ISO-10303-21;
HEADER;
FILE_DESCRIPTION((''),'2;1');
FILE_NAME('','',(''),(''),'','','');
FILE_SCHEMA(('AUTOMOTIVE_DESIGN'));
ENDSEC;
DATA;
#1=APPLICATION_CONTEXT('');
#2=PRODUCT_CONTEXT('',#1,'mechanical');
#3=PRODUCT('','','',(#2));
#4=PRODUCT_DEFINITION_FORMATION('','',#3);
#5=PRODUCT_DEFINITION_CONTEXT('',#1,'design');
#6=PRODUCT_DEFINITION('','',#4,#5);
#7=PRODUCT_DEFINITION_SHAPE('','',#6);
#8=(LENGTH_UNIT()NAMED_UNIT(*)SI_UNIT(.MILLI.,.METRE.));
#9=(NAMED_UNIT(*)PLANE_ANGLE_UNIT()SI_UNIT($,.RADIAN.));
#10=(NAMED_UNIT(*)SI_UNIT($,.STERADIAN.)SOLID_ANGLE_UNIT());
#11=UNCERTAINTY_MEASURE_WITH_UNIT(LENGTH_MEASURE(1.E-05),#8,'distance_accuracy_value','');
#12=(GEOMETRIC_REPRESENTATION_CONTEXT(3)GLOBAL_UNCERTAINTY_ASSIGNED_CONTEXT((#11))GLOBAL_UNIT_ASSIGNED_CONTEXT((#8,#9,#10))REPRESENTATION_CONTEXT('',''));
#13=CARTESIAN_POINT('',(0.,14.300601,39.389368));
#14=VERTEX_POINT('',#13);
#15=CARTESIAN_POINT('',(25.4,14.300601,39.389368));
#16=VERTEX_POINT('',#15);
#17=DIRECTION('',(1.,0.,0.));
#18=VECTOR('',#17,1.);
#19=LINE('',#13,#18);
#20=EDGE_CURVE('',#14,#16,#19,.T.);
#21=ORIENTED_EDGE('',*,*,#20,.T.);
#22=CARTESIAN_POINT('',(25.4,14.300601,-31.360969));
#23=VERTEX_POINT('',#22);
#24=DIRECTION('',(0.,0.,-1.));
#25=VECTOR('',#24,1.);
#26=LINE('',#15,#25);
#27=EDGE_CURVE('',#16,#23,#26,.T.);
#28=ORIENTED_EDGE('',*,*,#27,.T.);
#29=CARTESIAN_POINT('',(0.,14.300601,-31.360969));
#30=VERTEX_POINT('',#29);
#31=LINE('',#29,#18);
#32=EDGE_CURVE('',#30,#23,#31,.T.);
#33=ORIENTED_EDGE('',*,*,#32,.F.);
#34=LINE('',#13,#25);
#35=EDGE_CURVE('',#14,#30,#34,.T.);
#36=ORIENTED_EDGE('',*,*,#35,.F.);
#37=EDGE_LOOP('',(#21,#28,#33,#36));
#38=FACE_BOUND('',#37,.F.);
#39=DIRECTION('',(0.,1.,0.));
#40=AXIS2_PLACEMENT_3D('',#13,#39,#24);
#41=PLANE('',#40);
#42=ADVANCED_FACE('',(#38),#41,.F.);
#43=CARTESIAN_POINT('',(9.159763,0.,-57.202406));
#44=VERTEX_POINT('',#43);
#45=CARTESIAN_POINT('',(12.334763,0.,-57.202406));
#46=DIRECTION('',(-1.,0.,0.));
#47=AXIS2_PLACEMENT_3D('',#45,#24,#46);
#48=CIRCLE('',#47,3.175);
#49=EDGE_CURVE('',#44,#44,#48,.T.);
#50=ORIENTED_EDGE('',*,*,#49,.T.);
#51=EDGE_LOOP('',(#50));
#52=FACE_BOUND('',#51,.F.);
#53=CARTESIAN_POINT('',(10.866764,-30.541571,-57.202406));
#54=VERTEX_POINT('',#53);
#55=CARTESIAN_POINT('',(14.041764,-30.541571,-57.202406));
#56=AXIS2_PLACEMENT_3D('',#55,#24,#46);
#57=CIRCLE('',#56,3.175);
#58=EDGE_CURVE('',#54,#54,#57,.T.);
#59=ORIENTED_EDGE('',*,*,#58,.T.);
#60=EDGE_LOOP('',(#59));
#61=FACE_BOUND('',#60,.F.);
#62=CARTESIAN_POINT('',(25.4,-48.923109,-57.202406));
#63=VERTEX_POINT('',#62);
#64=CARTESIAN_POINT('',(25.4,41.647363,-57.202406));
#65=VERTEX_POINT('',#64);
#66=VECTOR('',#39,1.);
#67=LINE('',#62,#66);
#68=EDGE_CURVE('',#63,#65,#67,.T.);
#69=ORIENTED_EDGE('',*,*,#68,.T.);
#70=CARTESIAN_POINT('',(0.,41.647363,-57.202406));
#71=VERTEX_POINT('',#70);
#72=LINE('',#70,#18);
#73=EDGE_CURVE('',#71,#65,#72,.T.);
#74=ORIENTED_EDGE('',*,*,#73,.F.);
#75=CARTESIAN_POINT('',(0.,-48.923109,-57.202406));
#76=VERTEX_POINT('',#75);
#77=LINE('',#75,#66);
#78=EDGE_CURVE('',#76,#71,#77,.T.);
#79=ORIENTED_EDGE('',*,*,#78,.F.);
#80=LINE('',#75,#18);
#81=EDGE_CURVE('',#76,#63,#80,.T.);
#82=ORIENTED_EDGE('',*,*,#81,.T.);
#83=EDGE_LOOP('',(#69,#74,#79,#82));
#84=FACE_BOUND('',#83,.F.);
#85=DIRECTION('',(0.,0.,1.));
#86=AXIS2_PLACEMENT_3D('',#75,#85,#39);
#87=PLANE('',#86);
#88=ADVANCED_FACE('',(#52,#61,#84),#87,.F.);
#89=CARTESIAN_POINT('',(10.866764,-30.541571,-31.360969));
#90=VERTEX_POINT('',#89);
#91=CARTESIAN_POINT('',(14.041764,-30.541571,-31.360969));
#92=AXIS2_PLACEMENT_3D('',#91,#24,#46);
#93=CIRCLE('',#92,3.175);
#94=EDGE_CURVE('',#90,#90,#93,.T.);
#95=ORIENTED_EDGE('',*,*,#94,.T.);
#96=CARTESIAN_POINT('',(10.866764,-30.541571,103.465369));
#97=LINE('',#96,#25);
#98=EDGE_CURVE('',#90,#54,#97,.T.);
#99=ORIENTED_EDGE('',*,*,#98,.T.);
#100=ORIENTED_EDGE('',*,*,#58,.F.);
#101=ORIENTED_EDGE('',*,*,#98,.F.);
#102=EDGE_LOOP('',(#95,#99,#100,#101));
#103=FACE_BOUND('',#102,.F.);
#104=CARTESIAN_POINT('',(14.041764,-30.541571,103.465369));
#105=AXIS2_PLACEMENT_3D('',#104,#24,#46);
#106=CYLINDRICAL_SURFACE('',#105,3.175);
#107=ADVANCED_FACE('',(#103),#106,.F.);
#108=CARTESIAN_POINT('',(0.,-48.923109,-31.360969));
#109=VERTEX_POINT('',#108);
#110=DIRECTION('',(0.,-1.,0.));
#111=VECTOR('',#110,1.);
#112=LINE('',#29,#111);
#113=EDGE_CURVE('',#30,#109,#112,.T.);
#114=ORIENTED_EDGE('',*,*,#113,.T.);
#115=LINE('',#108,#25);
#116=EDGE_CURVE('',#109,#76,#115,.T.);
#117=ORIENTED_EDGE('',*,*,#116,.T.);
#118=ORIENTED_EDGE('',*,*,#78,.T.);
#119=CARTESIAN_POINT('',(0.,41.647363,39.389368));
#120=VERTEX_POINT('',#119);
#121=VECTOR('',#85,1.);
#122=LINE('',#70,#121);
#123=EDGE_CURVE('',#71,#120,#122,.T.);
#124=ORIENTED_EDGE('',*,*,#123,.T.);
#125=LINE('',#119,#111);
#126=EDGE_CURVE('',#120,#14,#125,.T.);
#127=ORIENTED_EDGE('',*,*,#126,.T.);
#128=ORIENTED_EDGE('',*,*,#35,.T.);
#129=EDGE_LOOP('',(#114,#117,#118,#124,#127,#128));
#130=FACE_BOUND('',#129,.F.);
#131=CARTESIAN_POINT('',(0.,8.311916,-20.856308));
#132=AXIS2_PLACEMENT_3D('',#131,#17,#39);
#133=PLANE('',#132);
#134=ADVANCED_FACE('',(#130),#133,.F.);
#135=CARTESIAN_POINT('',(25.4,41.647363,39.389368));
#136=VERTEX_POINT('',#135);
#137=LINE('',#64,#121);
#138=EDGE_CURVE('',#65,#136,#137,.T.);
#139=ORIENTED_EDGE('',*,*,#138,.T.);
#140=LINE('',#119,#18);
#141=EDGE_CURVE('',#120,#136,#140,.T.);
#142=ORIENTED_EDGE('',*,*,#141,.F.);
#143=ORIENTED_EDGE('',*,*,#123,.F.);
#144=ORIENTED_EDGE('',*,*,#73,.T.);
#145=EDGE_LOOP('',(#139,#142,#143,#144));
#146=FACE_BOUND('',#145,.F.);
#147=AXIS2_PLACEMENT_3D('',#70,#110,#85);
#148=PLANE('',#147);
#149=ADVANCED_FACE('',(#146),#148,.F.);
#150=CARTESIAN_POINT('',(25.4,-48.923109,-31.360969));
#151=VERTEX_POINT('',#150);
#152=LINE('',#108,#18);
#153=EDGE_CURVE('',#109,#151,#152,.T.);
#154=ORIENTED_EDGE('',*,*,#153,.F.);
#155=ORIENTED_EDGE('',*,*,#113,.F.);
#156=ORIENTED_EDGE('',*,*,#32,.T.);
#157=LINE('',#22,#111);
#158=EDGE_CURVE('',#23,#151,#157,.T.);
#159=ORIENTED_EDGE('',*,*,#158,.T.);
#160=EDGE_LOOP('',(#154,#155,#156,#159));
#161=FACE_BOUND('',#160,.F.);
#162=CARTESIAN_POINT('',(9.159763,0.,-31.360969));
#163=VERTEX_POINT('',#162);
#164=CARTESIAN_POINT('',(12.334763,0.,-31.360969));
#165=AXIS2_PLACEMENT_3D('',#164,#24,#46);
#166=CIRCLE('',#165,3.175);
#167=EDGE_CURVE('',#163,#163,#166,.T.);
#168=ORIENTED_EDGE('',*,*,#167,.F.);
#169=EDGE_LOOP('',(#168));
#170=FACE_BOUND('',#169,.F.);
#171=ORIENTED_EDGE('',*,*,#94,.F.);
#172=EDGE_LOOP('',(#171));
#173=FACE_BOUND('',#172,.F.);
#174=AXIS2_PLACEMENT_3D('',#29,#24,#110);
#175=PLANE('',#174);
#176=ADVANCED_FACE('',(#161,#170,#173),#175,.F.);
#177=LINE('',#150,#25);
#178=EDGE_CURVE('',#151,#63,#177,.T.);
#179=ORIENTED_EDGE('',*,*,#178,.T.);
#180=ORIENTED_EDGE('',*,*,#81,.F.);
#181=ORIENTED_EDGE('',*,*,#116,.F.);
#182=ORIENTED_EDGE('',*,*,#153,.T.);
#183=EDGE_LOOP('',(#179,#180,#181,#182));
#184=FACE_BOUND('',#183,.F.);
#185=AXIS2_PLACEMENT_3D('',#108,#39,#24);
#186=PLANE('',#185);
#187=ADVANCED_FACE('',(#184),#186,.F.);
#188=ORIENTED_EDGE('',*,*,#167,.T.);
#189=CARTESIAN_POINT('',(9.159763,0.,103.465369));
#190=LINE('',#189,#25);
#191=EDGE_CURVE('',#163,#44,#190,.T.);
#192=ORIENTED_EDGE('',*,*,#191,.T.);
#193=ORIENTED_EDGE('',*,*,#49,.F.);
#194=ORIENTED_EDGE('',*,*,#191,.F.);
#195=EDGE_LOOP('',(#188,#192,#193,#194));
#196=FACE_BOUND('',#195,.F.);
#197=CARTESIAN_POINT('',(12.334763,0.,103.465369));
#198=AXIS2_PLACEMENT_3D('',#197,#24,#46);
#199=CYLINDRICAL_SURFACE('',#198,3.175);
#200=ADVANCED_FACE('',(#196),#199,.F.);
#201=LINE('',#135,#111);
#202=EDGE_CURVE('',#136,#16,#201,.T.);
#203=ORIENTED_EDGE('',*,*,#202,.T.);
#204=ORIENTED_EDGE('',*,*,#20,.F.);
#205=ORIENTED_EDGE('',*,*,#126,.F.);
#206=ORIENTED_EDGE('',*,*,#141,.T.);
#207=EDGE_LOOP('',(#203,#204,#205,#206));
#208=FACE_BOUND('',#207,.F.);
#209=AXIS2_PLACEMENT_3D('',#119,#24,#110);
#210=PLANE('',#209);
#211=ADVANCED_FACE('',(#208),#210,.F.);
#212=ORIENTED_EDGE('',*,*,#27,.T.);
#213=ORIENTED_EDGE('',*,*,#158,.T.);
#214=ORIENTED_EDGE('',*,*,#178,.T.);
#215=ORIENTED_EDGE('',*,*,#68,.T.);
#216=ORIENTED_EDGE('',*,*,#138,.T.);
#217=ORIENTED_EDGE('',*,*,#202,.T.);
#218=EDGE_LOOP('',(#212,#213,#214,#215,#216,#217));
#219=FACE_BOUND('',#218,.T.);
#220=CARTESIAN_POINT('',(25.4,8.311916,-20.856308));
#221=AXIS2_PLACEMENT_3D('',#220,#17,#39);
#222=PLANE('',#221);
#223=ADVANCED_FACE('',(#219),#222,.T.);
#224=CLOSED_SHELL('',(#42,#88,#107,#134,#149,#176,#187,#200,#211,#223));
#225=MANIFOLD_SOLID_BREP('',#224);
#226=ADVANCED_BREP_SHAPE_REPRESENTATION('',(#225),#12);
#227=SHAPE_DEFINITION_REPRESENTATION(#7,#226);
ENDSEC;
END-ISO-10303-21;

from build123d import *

# Parameters (mm, degrees)
F1_DEPTH = 25.4
F3_D     = 6.35
F5_D     = 6.35


# Not quite as in the source:
# - a feature names something its author has since deleted; it is built from what else it names


with BuildPart() as f1:
    # F0 (on Right) → F1 (new body)
    with BuildSketch(Plane.YZ):
        Polygon((14.3006006256, -31.3609689474), (-48.9231087267, -31.3609689474), (-48.9231087267, -57.2024062276), (41.6473634541, -57.2024062276), (41.6473634541, 39.3893681467), (14.3006006256, 39.3893681467), align=None)
    extrude(amount=F1_DEPTH)

    # F3 (through all)
    with Locations(Plane.XY.offset(-31.3609689474)):
        with Locations((14.0417637303, -30.5415708572)):
            Hole(F3_D / 2)

    # F5 (through all)
    with Locations(Plane.XY.offset(-31.3609689474)):
        with Locations((12.3347630724, 0)):
            Hole(F5_D / 2)


solid = f1.part
